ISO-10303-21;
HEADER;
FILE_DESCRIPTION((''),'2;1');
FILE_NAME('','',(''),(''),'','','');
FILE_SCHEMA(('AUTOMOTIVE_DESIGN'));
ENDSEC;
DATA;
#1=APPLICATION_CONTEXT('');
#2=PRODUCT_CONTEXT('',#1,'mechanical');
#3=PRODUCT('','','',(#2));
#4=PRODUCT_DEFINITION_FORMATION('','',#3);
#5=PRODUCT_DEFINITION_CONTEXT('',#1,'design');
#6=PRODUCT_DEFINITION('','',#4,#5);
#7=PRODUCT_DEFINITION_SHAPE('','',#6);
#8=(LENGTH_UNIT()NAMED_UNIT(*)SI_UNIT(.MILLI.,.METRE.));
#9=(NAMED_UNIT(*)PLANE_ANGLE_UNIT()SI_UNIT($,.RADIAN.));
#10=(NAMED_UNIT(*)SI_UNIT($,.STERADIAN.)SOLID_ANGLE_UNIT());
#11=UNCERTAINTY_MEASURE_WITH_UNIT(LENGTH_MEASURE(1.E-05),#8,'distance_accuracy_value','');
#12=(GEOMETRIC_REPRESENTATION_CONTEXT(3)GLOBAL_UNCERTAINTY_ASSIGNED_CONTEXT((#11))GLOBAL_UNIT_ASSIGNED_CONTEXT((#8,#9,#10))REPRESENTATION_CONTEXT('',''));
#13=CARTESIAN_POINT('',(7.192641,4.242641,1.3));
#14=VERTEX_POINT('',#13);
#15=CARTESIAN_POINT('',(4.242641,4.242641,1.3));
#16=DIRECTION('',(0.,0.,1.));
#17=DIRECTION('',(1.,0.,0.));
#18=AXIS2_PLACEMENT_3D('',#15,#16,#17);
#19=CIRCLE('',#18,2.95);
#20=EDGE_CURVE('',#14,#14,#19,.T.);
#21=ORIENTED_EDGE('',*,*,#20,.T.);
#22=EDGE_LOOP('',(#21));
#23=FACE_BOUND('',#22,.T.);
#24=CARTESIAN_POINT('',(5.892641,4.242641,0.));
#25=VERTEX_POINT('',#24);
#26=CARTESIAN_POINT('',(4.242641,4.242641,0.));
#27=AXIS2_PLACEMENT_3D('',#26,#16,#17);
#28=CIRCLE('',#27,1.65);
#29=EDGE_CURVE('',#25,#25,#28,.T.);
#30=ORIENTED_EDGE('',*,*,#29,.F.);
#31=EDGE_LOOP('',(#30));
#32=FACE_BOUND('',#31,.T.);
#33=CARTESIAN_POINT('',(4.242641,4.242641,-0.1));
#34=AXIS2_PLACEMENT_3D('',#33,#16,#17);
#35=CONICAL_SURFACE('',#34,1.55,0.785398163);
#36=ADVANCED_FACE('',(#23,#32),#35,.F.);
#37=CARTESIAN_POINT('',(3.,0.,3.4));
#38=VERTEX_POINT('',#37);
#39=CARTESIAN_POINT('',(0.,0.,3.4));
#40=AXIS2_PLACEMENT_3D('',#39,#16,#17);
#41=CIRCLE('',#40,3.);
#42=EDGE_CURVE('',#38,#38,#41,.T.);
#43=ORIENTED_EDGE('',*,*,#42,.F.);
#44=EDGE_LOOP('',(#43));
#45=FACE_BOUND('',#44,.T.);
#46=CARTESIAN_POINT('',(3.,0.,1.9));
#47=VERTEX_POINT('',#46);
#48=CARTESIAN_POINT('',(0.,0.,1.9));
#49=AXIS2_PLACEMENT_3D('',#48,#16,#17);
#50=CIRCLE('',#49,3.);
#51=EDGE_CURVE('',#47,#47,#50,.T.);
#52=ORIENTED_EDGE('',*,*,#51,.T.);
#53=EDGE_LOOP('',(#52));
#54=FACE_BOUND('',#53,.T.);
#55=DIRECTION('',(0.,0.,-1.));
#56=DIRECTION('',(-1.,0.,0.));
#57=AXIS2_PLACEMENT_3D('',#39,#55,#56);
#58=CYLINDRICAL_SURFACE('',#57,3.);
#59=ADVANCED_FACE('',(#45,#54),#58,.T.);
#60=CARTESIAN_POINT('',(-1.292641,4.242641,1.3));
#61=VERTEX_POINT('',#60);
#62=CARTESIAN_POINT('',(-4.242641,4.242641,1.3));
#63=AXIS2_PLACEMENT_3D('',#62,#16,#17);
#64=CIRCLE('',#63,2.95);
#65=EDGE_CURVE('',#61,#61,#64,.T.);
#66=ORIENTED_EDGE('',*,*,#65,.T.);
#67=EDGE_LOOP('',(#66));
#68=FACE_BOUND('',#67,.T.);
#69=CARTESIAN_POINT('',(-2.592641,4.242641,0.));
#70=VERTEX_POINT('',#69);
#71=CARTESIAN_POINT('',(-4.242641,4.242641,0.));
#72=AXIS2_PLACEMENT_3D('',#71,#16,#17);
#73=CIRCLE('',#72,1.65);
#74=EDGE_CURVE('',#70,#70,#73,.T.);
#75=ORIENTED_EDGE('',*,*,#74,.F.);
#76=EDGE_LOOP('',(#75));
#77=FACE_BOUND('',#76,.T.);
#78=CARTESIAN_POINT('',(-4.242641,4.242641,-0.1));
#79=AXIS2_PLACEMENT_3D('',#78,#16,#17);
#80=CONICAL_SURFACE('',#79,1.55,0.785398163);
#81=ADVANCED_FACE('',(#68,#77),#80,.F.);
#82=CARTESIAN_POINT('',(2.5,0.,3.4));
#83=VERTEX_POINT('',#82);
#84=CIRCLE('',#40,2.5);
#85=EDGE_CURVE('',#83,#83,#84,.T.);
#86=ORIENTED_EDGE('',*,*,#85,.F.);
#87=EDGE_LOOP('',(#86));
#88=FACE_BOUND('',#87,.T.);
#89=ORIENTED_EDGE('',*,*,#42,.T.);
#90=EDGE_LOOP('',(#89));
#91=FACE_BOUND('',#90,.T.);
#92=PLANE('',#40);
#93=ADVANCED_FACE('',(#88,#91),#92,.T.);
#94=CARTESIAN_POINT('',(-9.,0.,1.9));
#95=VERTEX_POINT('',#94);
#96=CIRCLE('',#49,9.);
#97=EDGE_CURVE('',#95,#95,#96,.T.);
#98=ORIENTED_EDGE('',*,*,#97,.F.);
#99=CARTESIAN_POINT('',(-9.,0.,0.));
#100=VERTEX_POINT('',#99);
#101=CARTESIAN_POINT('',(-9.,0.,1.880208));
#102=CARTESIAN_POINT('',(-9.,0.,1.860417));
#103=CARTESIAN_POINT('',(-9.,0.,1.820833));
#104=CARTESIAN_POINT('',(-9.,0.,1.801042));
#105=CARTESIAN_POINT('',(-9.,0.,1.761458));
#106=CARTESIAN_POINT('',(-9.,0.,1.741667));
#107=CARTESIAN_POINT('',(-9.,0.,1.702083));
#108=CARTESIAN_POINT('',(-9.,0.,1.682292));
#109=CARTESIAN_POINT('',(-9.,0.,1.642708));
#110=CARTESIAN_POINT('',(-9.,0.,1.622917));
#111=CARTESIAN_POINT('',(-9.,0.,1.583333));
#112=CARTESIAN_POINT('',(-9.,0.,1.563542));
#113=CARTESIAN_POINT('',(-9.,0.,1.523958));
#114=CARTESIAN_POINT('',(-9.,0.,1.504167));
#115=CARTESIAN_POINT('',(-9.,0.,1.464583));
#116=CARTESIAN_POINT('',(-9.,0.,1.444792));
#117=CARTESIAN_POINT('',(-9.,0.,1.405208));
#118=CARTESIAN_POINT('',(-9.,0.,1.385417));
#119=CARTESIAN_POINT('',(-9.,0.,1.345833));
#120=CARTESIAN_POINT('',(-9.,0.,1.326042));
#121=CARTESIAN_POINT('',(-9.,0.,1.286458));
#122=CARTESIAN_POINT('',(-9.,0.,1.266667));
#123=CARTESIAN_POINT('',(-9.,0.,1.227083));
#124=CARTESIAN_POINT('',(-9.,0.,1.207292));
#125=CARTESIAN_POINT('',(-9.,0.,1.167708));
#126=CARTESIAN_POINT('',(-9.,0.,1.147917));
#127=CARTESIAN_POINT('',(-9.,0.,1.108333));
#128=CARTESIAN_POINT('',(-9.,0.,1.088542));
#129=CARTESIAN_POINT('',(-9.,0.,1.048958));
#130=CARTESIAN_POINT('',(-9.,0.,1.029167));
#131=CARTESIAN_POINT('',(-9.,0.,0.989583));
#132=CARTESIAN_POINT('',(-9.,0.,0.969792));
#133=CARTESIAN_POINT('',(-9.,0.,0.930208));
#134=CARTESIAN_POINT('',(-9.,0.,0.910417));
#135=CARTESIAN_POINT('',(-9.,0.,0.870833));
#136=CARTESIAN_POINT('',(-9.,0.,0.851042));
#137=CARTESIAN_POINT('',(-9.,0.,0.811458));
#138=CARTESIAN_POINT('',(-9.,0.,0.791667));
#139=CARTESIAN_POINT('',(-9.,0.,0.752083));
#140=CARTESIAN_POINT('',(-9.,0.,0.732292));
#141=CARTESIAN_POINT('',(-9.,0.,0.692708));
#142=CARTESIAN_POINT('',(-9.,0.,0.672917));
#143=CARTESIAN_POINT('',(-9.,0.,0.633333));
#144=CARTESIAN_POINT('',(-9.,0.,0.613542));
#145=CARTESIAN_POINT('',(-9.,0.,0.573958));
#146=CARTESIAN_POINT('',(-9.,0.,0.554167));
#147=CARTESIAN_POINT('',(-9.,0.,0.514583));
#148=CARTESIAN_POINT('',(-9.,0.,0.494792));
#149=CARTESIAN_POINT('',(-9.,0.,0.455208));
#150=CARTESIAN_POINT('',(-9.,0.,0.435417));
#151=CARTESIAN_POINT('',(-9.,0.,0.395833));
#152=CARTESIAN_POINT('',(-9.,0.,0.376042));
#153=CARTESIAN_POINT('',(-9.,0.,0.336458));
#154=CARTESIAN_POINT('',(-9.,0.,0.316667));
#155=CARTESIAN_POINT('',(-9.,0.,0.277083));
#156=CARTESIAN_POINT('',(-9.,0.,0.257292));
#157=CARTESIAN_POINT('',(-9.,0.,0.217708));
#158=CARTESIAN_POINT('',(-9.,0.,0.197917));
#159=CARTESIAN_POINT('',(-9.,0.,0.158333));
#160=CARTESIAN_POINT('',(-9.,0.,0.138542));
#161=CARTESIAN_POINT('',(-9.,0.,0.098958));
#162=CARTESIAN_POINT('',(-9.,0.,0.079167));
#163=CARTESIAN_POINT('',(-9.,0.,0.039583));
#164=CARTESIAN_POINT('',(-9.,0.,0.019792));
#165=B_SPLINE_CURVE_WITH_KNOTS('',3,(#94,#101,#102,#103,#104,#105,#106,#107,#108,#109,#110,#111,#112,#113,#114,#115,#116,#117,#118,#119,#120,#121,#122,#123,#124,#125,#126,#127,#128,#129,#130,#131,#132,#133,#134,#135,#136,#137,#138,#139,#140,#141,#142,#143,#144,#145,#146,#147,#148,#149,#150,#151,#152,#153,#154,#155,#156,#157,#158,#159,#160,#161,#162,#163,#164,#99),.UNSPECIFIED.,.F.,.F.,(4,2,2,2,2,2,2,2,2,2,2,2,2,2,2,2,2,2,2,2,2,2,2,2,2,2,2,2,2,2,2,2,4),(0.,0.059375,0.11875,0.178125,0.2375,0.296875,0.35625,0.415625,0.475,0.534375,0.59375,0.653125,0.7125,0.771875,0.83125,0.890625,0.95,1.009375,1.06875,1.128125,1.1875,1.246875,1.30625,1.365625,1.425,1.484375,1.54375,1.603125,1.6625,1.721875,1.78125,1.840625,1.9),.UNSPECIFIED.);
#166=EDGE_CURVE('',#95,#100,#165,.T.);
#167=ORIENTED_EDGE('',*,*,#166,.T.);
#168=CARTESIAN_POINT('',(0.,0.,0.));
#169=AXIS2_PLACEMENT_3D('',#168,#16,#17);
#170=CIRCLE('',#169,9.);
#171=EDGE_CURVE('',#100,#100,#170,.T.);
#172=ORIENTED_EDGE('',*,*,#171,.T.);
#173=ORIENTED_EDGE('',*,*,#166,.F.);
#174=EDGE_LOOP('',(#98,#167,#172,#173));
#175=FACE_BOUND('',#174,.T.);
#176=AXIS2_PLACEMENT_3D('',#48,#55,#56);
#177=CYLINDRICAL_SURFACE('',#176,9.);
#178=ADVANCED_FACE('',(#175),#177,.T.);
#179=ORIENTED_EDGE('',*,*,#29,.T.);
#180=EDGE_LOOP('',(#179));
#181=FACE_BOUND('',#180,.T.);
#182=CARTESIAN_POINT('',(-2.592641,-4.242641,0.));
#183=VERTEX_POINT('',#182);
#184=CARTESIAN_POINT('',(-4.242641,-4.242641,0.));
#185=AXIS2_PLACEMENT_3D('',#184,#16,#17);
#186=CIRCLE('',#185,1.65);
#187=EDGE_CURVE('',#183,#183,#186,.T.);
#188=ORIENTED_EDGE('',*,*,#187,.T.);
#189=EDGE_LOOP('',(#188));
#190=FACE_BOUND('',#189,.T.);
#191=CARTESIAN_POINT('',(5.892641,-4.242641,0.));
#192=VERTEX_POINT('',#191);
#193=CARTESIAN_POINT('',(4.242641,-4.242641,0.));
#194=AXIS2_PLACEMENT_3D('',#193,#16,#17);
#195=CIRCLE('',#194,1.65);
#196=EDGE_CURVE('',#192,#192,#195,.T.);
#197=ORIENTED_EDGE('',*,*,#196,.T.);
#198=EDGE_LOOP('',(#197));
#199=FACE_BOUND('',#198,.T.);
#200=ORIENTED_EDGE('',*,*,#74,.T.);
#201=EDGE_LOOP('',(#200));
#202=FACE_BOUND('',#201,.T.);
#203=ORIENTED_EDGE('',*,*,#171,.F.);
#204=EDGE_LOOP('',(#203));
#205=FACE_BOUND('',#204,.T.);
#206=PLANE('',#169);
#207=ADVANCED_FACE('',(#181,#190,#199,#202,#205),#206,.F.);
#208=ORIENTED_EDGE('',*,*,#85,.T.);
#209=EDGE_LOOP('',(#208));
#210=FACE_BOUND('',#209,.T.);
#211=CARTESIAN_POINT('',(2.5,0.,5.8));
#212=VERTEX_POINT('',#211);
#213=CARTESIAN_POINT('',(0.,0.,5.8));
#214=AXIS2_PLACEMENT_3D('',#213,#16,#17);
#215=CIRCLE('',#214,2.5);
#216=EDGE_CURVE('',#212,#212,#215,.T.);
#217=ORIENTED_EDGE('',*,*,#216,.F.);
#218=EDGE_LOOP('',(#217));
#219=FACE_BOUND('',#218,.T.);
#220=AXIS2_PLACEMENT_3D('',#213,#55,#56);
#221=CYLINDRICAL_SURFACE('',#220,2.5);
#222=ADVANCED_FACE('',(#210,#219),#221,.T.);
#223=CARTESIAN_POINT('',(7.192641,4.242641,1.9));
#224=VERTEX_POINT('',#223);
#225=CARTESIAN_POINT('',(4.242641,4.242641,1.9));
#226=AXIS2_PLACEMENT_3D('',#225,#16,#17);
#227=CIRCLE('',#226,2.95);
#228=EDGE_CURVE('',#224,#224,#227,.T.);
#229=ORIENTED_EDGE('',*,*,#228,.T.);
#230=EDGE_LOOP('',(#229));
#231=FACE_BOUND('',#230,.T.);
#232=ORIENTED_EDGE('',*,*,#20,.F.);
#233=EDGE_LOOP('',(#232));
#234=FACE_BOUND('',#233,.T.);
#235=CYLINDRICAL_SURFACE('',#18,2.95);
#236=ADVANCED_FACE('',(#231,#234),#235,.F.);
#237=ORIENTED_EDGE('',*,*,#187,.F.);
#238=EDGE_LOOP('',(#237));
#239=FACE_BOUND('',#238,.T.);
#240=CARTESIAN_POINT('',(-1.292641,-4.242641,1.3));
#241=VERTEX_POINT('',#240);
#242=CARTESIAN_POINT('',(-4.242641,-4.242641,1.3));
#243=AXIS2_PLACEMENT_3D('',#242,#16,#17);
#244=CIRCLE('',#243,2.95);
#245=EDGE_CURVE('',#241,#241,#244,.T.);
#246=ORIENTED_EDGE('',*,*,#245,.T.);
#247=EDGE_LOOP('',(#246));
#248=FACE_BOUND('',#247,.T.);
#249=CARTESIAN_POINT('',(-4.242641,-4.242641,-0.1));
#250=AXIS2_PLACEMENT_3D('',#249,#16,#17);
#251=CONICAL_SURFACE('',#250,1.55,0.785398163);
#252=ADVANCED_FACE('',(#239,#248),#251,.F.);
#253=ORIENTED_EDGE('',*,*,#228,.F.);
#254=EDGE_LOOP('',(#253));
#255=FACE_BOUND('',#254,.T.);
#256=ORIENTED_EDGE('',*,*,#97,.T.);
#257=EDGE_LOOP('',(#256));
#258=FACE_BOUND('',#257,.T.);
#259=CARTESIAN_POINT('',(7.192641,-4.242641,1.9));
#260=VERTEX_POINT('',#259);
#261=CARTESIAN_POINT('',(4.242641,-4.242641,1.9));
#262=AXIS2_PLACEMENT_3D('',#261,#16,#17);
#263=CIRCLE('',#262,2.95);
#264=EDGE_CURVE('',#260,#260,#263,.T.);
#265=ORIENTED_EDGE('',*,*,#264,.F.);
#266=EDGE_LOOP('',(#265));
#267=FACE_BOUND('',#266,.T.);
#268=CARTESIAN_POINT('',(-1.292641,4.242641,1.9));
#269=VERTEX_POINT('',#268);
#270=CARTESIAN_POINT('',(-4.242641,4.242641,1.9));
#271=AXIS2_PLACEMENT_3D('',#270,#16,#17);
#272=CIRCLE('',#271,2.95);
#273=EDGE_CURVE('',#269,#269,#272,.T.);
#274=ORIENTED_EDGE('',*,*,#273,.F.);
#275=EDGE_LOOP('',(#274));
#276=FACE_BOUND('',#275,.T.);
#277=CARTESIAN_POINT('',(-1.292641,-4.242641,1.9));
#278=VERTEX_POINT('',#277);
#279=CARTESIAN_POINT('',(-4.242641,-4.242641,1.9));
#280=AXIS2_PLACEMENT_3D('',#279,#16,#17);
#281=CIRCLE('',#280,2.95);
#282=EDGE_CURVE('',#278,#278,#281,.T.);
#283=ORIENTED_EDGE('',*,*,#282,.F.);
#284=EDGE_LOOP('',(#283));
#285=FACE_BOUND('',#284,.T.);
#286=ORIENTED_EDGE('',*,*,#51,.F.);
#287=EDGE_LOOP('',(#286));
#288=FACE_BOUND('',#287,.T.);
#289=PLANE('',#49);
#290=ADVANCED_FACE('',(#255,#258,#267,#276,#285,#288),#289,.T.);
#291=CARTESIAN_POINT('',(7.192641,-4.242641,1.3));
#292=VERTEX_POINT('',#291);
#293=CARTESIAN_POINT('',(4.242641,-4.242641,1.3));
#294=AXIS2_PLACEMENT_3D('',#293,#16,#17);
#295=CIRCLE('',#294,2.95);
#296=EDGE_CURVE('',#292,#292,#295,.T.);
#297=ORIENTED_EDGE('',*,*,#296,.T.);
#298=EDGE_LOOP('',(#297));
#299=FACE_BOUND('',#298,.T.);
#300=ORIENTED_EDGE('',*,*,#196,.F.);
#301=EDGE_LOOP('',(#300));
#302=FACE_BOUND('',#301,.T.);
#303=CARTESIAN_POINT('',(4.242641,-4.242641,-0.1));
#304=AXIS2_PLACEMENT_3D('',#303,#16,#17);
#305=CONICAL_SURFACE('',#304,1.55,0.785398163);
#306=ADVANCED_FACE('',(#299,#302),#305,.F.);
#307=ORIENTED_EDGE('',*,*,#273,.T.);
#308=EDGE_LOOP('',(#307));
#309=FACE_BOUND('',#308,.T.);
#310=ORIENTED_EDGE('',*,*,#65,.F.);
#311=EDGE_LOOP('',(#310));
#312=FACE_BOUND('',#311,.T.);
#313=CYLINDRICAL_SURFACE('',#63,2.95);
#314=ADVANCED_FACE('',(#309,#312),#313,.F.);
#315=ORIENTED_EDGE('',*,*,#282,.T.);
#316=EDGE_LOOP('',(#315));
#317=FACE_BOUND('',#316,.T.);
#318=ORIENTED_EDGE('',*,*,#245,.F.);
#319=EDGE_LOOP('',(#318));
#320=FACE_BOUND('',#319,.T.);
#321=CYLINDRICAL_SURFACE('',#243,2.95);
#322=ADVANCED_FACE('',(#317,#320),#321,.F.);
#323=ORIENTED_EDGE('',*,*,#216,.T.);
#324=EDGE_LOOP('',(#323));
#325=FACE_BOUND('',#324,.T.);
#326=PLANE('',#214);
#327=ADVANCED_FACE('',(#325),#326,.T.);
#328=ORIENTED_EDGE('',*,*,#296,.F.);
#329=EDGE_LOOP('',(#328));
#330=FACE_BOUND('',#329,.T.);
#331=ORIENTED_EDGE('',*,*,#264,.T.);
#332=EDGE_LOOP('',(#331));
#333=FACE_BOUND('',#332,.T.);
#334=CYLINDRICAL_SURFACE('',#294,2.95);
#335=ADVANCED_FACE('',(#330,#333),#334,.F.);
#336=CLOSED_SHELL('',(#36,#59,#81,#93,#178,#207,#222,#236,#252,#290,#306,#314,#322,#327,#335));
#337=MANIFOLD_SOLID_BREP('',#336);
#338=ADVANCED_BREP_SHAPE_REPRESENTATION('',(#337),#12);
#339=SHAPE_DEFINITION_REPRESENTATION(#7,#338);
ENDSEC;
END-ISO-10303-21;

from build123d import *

# Parameters (mm, degrees)
SKETCH1_R           = 9
SKETCH1_R_2         = 1.55
BOSS_EXTRUDE1_DEPTH = 1.9
SKETCH2_R           = 3
BOSS_EXTRUDE2_DEPTH = 1.5
SKETCH3_R           = 2.5
BOSS_EXTRUDE3_DEPTH = 2.4
SKETCH4_R           = 2.95
CUT_EXTRUDE1_DEPTH  = 0.6
CHAMFER1_SIZE       = 1.4


with BuildPart() as part:
    # Sketch1 → Boss-Extrude1 (new body)
    with BuildSketch(Plane(origin=(0, 0, 0), x_dir=(0, 1, 0), z_dir=(0, 0, 1))):
        with Locations(Location((0, 0, 0), (0, 0, 90))):
            Circle(SKETCH1_R)
        with Locations(Location((-4.242640687, 4.242640687, 0), (0, 0, 90))):
            Circle(SKETCH1_R_2, mode=Mode.SUBTRACT)
        with Locations(Location((4.242640687, 4.242640687, 0), (0, 0, 90))):
            Circle(SKETCH1_R_2, mode=Mode.SUBTRACT)
        with Locations(Location((4.242640687, -4.242640687, 0), (0, 0, 90))):
            Circle(SKETCH1_R_2, mode=Mode.SUBTRACT)
        with Locations(Location((-4.242640687, -4.242640687, 0), (0, 0, 90))):
            Circle(SKETCH1_R_2, mode=Mode.SUBTRACT)
    extrude(amount=BOSS_EXTRUDE1_DEPTH)

    # Sketch2 → Boss-Extrude2 (add)
    with BuildSketch(Plane.XY.offset(1.9)):
        Circle(SKETCH2_R)
    extrude(amount=BOSS_EXTRUDE2_DEPTH)

    # Sketch3 → Boss-Extrude3 (add)
    with BuildSketch(Plane.XY.offset(3.4)):
        Circle(SKETCH3_R)
    extrude(amount=BOSS_EXTRUDE3_DEPTH)

    # Sketch4 → Cut-Extrude1 (cut)
    with BuildSketch(Plane.XY.offset(1.9)):
        with Locations((-4.242640687, 4.242640687)):
            Circle(SKETCH4_R)
        with Locations((4.242640687, 4.242640687)):
            Circle(SKETCH4_R)
        with Locations((4.242640687, -4.242640687)):
            Circle(SKETCH4_R)
        with Locations((-4.242640687, -4.242640687)):
            Circle(SKETCH4_R)
    extrude(amount=-CUT_EXTRUDE1_DEPTH, mode=Mode.SUBTRACT)

    # Chamfer1
    # the kernel refuses this chamfer: 1.4 mm, written as the material it takes off along each edge
    with BuildSketch(Plane(origin=(-4.242640687, -4.242640687, 1.3), x_dir=(-1, 0, 0), z_dir=(0, -1, 0))) as chamfer1_piece_1_section:
        Polygon((1.55, CHAMFER1_SIZE), (1.55 + CHAMFER1_SIZE, 0), (1.55, 0), align=None)
    chamfer1_piece_1 = revolve(axis=Axis((-4.242640687, -4.242640687, 1.3), (0, 0, -1)), mode=Mode.PRIVATE)
    chamfer1_piece_1 = chamfer1_piece_1 & Plane(origin=(-4.242640687, -4.242640687, 0.597078296), x_dir=(1, 0, 0), z_dir=(0, 0, 1)) * Cylinder(2.95, 12, mode=Mode.PRIVATE)
    add(chamfer1_piece_1, mode=Mode.SUBTRACT)
    with BuildSketch(Plane(origin=(4.242640687, -4.242640687, 1.3), x_dir=(-1, 0, 0), z_dir=(0, -1, 0))) as chamfer1_piece_2_section:
        Polygon((1.55, CHAMFER1_SIZE), (1.55 + CHAMFER1_SIZE, 0), (1.55, 0), align=None)
    chamfer1_piece_2 = revolve(axis=Axis((4.242640687, -4.242640687, 1.3), (0, 0, -1)), mode=Mode.PRIVATE)
    chamfer1_piece_2 = chamfer1_piece_2 & Plane(origin=(4.242640687, -4.242640687, 0.597078296), x_dir=(1, 0, 0), z_dir=(0, 0, 1)) * Cylinder(2.95, 12, mode=Mode.PRIVATE)
    add(chamfer1_piece_2, mode=Mode.SUBTRACT)
    with BuildSketch(Plane(origin=(4.242640687, 4.242640687, 1.3), x_dir=(-1, 0, 0), z_dir=(0, -1, 0))) as chamfer1_piece_3_section:
        Polygon((1.55, CHAMFER1_SIZE), (1.55 + CHAMFER1_SIZE, 0), (1.55, 0), align=None)
    chamfer1_piece_3 = revolve(axis=Axis((4.242640687, 4.242640687, 1.3), (0, 0, -1)), mode=Mode.PRIVATE)
    chamfer1_piece_3 = chamfer1_piece_3 & Plane(origin=(4.242640687, 4.242640687, 0.597078296), x_dir=(1, 0, 0), z_dir=(0, 0, 1)) * Cylinder(2.95, 12, mode=Mode.PRIVATE)
    add(chamfer1_piece_3, mode=Mode.SUBTRACT)
    with BuildSketch(Plane(origin=(-4.242640687, 4.242640687, 1.3), x_dir=(-1, 0, 0), z_dir=(0, -1, 0))) as chamfer1_piece_4_section:
        Polygon((1.55, CHAMFER1_SIZE), (1.55 + CHAMFER1_SIZE, 0), (1.55, 0), align=None)
    chamfer1_piece_4 = revolve(axis=Axis((-4.242640687, 4.242640687, 1.3), (0, 0, -1)), mode=Mode.PRIVATE)
    chamfer1_piece_4 = chamfer1_piece_4 & Plane(origin=(-4.242640687, 4.242640687, 0.597078296), x_dir=(1, 0, 0), z_dir=(0, 0, 1)) * Cylinder(2.95, 12, mode=Mode.PRIVATE)
    add(chamfer1_piece_4, mode=Mode.SUBTRACT)


solid = part.part
